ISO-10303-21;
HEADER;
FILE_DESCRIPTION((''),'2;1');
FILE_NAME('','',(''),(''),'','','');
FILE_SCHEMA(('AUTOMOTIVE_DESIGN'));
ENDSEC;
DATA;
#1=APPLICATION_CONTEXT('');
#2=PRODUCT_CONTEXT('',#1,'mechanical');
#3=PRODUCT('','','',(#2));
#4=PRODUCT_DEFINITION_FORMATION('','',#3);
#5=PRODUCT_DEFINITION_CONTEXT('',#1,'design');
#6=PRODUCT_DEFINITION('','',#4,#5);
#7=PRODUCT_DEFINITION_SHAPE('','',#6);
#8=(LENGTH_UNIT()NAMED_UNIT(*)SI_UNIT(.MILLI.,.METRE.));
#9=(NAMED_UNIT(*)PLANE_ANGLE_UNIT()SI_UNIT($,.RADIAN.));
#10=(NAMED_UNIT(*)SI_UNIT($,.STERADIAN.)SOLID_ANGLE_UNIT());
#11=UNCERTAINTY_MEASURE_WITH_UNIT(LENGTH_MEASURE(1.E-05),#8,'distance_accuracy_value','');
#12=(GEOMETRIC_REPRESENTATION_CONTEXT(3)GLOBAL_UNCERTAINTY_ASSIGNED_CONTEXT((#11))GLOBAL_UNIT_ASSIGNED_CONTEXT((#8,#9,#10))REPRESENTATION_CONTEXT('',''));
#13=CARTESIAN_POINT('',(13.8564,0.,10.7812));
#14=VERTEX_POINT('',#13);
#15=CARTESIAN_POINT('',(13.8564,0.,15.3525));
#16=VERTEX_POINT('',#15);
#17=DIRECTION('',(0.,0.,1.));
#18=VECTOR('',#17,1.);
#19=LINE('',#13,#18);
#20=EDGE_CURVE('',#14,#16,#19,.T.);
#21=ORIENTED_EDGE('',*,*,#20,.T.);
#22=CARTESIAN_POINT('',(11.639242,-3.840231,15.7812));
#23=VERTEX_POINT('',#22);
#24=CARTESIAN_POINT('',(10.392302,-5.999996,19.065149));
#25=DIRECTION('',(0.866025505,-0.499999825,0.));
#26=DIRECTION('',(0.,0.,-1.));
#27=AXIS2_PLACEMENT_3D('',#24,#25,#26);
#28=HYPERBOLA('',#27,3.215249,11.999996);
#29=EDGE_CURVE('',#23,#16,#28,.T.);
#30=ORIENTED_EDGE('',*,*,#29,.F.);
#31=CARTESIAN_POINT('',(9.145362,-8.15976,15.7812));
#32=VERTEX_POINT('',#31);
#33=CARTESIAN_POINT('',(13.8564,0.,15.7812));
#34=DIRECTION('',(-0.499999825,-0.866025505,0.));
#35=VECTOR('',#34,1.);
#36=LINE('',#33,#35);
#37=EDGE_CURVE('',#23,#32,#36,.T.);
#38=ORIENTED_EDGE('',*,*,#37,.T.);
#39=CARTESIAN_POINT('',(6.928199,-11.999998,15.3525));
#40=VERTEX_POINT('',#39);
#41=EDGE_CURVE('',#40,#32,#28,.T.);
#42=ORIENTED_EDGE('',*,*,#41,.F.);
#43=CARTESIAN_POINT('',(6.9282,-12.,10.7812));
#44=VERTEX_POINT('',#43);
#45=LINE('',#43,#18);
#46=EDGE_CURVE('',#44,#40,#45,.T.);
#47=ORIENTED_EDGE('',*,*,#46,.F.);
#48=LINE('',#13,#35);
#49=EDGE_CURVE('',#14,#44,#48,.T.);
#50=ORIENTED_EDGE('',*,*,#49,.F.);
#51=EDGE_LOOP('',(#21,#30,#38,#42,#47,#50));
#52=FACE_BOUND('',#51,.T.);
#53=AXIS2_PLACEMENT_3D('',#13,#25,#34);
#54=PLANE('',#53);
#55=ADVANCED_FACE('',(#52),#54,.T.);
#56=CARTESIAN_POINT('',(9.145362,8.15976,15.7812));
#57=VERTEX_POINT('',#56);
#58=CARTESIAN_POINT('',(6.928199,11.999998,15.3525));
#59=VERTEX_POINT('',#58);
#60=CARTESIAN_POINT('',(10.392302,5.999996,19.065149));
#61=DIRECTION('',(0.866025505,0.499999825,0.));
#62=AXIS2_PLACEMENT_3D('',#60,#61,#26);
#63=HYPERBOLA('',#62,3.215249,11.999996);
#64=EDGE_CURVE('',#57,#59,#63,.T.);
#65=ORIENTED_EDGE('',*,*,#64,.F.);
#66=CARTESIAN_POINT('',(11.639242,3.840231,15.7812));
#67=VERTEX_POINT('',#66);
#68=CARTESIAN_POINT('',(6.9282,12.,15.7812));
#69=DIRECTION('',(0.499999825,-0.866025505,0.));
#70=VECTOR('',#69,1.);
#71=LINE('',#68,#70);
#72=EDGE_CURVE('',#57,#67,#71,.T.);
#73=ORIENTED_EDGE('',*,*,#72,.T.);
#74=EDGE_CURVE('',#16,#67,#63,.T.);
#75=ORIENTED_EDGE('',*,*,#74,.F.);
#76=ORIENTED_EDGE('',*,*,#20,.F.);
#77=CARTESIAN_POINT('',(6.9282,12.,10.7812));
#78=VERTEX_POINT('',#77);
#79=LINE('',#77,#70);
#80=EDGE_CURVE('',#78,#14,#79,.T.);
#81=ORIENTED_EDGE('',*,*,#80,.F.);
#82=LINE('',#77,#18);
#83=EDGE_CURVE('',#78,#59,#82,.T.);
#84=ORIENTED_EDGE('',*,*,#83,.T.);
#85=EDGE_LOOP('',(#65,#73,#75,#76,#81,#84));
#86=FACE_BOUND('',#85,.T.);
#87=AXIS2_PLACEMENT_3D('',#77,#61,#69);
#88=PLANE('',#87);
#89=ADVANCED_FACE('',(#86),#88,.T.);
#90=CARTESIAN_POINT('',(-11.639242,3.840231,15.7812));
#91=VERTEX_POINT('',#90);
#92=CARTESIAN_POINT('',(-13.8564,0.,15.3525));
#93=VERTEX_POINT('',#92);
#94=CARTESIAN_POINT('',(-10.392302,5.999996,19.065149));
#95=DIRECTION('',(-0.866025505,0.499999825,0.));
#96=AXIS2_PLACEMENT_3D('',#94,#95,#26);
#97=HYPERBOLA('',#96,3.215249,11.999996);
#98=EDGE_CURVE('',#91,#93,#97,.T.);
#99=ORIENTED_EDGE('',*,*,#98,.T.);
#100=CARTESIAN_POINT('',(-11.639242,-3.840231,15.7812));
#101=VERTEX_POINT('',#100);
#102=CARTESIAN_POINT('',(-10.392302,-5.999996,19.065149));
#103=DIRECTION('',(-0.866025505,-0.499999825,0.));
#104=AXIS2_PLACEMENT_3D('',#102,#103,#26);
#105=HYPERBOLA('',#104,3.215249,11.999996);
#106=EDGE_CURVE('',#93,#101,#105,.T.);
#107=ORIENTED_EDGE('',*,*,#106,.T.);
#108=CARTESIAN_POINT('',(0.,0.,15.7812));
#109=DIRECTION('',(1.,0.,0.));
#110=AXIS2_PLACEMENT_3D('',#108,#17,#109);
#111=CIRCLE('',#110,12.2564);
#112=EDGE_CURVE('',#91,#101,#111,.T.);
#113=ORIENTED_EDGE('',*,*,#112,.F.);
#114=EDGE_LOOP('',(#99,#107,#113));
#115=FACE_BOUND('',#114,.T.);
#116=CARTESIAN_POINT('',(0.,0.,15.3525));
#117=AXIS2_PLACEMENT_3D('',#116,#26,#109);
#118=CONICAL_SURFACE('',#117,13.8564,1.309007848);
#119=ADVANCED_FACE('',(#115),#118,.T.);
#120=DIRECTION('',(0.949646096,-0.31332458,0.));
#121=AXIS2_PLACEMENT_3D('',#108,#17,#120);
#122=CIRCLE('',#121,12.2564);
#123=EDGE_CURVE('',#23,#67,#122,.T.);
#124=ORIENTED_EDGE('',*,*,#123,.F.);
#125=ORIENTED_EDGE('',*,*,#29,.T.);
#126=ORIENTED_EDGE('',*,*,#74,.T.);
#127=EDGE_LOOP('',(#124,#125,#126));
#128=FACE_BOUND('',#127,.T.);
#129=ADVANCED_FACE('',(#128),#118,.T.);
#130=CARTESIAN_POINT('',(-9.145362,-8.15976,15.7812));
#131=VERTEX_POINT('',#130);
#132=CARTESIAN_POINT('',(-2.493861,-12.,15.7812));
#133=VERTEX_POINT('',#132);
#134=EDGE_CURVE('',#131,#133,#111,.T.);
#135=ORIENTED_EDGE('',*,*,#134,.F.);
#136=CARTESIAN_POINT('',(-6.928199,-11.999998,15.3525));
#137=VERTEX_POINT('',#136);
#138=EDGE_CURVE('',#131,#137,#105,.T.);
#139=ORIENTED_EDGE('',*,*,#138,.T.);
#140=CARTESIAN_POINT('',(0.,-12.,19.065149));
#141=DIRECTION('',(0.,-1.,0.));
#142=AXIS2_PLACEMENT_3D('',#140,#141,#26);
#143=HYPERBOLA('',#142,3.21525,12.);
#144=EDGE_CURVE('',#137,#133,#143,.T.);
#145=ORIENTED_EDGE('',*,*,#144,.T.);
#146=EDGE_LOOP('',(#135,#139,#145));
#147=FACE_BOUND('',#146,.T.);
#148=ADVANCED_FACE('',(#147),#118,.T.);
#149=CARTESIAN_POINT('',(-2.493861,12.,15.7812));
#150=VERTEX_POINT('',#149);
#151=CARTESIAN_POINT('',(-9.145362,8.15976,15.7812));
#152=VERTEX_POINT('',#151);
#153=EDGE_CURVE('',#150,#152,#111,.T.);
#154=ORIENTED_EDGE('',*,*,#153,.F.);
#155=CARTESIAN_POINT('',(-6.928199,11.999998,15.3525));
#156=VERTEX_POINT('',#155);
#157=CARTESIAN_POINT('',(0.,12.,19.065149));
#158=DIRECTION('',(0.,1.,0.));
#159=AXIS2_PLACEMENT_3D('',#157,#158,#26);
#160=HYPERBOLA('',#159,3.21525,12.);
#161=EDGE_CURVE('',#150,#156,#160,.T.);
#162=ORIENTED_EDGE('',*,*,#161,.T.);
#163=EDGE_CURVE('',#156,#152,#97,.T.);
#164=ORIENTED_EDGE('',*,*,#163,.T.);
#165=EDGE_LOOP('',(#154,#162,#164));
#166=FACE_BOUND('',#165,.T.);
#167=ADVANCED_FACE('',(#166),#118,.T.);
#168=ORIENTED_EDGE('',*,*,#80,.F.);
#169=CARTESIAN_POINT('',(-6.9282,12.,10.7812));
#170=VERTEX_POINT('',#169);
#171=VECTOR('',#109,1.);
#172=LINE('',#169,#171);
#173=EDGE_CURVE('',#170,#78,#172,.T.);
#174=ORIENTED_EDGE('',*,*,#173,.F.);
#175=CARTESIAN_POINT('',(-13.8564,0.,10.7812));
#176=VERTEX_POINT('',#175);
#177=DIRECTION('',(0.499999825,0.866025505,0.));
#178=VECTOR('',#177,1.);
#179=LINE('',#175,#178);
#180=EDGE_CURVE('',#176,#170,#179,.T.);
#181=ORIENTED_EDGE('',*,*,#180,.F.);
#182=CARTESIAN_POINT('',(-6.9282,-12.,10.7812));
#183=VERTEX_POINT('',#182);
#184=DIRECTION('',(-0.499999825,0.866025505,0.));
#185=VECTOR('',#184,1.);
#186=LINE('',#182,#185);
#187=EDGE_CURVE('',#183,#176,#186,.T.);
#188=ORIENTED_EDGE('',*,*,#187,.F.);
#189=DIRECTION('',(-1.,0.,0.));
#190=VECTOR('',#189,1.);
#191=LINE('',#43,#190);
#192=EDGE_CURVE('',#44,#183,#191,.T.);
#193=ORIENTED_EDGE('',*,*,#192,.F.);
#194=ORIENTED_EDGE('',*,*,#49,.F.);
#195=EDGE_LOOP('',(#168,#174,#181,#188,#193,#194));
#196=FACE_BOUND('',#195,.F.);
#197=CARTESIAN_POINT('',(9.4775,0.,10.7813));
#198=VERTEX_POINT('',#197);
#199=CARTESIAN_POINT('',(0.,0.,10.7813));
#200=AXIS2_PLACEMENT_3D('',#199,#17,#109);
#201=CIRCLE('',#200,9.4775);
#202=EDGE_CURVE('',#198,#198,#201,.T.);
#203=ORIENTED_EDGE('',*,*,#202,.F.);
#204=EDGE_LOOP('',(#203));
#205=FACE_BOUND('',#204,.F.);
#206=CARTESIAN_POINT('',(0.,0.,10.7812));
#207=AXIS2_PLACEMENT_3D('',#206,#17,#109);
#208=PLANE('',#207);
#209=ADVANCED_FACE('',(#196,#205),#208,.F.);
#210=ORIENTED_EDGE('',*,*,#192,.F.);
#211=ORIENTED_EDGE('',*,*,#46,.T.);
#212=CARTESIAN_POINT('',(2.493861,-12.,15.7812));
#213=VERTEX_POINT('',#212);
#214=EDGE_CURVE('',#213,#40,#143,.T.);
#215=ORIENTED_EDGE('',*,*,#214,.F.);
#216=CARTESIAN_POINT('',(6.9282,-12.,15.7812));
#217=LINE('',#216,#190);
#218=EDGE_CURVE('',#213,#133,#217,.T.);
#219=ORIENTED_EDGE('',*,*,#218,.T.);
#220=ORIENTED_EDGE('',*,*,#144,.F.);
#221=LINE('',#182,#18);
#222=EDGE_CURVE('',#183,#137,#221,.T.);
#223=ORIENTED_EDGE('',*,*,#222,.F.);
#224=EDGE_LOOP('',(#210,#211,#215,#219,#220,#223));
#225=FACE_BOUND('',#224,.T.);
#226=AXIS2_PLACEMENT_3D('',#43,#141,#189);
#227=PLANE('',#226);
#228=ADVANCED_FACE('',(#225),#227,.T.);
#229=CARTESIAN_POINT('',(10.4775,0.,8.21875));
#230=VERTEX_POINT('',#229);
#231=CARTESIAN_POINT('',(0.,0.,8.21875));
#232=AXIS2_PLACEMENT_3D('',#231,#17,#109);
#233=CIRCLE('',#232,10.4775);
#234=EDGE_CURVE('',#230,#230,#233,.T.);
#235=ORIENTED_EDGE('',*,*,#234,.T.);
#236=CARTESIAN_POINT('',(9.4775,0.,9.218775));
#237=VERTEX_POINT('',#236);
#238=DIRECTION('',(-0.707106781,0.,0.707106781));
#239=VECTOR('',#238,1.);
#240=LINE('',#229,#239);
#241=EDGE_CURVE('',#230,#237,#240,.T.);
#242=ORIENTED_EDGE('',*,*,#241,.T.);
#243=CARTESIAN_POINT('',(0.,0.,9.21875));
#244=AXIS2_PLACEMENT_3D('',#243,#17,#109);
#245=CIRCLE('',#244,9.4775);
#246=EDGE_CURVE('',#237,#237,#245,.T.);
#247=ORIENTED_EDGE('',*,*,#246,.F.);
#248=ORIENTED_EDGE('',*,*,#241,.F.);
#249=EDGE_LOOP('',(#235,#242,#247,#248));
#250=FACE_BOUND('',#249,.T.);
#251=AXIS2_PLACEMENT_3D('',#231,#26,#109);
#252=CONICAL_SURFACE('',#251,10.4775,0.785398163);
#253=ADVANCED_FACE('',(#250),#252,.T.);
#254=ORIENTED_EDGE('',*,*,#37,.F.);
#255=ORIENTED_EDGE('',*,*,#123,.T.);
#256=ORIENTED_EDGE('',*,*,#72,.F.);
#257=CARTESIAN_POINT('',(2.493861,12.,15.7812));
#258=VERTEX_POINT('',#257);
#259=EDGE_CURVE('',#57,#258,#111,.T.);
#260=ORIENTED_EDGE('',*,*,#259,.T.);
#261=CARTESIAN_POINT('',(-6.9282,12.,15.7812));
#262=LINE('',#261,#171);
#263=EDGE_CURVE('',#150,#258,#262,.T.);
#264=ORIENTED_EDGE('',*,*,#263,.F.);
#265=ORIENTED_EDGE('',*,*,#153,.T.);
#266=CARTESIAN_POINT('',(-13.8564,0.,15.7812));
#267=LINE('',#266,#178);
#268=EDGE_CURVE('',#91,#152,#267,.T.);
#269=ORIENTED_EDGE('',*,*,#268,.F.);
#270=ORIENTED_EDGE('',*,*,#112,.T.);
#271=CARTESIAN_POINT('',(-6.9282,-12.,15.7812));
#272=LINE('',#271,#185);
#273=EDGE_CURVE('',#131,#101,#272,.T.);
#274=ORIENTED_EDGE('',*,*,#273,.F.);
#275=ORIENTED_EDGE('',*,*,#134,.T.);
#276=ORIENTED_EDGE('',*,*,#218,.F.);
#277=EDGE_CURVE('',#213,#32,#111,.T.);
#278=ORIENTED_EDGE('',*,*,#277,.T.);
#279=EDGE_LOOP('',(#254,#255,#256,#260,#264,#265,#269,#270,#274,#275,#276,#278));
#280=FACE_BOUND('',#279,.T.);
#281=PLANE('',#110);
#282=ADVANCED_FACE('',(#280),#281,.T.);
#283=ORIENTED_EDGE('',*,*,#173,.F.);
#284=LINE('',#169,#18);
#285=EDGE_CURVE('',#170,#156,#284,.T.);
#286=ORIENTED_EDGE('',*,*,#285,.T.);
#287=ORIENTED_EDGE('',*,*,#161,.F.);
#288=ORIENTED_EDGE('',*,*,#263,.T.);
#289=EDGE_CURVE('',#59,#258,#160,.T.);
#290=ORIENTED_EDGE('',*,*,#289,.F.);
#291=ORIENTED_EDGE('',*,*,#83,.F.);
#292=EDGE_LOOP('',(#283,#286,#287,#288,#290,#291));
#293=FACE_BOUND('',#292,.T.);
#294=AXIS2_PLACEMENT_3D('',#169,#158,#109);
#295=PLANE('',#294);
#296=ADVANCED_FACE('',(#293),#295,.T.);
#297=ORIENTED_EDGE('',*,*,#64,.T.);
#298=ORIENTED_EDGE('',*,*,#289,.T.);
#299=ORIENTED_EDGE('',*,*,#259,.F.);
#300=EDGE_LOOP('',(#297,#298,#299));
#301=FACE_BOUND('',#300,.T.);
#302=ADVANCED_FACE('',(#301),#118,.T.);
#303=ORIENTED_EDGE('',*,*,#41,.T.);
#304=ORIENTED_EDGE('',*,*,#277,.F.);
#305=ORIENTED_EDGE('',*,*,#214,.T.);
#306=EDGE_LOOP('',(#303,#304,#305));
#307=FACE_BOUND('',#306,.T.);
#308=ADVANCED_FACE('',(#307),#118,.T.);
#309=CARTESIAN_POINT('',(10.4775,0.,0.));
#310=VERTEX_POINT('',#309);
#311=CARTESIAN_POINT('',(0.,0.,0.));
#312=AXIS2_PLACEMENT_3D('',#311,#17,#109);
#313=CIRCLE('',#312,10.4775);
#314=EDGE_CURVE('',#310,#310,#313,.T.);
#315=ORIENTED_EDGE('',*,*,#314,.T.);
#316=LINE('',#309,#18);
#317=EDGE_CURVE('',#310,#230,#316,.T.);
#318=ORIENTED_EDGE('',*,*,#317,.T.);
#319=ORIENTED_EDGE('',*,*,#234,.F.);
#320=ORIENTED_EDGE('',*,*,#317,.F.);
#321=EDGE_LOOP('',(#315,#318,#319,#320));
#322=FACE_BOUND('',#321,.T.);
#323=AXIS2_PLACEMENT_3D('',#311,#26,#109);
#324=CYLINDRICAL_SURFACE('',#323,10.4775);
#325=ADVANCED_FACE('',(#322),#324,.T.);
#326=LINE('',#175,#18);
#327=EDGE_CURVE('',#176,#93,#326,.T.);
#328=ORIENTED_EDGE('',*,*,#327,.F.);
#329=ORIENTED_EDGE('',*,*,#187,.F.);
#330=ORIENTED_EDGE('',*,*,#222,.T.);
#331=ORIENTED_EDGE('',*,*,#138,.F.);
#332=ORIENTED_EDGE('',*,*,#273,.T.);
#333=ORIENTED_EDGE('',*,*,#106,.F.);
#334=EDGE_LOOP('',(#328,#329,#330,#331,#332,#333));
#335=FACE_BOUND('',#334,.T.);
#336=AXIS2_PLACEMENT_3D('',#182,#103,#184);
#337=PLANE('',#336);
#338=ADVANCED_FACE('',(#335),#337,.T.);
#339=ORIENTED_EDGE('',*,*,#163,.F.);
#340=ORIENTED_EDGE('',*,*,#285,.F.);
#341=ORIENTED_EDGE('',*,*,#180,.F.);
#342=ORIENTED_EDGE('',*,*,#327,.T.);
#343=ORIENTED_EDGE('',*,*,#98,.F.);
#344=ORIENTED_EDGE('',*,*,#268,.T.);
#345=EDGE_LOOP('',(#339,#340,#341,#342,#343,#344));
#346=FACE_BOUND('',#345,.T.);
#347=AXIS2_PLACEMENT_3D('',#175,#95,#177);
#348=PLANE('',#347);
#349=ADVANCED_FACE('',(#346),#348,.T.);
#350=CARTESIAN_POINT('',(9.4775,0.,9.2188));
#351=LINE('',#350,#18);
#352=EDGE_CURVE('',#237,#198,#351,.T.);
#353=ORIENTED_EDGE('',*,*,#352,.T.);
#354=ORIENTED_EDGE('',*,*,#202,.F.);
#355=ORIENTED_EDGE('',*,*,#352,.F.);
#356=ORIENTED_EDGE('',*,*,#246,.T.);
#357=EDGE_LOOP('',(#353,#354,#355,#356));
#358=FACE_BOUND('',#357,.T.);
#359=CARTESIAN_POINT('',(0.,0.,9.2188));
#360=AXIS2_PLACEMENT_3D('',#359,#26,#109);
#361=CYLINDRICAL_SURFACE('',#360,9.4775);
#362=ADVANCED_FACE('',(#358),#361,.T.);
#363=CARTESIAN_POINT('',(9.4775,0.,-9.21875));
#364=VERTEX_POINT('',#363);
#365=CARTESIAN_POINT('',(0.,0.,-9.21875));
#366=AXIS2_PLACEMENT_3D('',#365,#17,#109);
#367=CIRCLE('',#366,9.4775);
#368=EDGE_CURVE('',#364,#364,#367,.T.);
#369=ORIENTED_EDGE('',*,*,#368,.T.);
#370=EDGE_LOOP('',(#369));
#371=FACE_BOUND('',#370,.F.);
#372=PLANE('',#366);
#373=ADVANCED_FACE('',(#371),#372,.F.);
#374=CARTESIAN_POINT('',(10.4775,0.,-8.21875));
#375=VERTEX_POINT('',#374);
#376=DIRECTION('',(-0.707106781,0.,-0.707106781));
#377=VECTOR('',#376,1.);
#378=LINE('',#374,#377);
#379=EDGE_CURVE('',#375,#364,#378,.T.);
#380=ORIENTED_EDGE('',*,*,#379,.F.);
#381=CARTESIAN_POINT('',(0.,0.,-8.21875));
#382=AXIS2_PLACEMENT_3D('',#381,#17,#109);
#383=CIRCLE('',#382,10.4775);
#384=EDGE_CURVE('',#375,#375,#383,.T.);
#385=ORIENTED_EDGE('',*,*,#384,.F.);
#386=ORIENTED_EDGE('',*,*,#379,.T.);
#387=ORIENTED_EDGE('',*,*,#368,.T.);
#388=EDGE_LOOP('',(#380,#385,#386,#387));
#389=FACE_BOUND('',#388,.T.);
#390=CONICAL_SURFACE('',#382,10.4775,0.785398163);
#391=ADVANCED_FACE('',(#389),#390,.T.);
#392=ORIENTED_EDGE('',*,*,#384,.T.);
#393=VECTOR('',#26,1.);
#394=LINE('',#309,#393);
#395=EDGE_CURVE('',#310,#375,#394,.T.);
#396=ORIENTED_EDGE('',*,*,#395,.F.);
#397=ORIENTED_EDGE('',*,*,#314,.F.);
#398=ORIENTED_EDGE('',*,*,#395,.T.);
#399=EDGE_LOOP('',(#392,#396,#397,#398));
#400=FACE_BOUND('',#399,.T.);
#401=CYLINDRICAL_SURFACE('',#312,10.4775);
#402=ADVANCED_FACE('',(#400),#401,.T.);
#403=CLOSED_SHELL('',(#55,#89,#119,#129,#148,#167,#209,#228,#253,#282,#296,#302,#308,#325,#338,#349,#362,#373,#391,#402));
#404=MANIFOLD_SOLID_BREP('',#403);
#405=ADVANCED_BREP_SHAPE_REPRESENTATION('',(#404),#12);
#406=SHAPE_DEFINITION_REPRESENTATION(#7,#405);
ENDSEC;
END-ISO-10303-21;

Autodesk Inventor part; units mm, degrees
ref_plane "YZ Plane" through (0, 0, 0) normal (1, 0, 0) x (0, 1, 0)
ref_plane "XZ Plane" through (0, 0, 0) normal (0, 1, 0) x (-1, 0, 0)
ref_plane "XY Plane" through (0, 0, 0) normal (0, 0, 1) x (1, 0, 0)
sketch "Szkic7" plane through (0, 0, 0) normal (0, 0, 1) x (1, 0, 0)
  circle A0 centre (0, 0) radius 10.4775
  dimension "d35" = 20.955
extrude "Wyciągnięcie proste2" add sketch "Szkic7" along normal mid plane 18.4375
chamfer "Faza2" distance 1 angle 45 1 edges at (-10.4775, 0, 9.2188)
sketch "Szkic9" plane through (0, 0, 9.2188) normal (0, 0, 1) x (1, 0, 0)
  circle A0 centre (0, 0) radius 9.4775 projected
extrude "Wyciągnięcie proste3" add sketch "Szkic9" along normal blind 1.5625
sketch "Szkic10" plane through (0, 0, 10.7812) normal (0, 0, 1) x (1, 0, 0)
  line L0 (-6.9282, 12) -> (6.9282, 12)
  line L1 (6.9282, 12) -> (13.8564, 0)
  line L2 (13.8564, 0) -> (6.9282, -12)
  line L3 (6.9282, -12) -> (-6.9282, -12)
  line L4 (-6.9282, -12) -> (-13.8564, 0)
  line L5 (-13.8564, 0) -> (-6.9282, 12)
  line L6 (0, 14.6685) -> (0, -14.6685) construction
  line L7 (-14.6685, 0) -> (14.6685, 0) construction
  point P0 (0, 0)
  point P1 (0, 0)
  point P2 (0, 12)
  dimension "d44" = 24
extrude "Wyciągnięcie proste4" add sketch "Szkic10" along normal blind 5
sketch "Szkic12" plane through (0, 0, 0) normal (0, 1, 0) x (-1, 0, 0)
  line L0 (0, -2.1463) -> (0, 12.8775) construction
  line L1 (-6.9282, 10.7812) -> (-6.9282, 15.7812) construction
  line L2 (-13.8564, 15.7812) -> (-6.9282, 15.7812) construction
  line L3 (-13.8564, 10.7812) -> (-13.8564, 15.7812) projected
  line L4 (-13.8564, 15.3525) -> (-12.2564, 15.7812)
  line L5 (-13.8564, 15.7812) -> (-6.9282, 15.7812) projected
  line L6 (-13.8564, 10.7812) -> (-6.9282, 10.7812) projected
  point P0 (0, 0)
  dimension "d50" = 15
  dimension "d51" = 1.6
revolve "Obrót2" cut sketch "Szkic12" angle 360 about axis through (0, 0, -10) along (0, 0, 1)
thread "Gwint3" size "G20.955x1.814" designation "G 1/2" class "A" standard "ISO Pipe Threads" full length
chamfer "Faza3" distance 1 angle 45 1 edges at (-10.4775, 0, -9.2188)
equation "\"d35\" = OD"
equation "\"d36\" = 0.7375 * L"
equation "\"d42\" = 0.0625 * L"
equation "\"d44\" = SW"
equation "\"d45\" = 0.2 * L"
equation "\"d51\" = 0.0666667 * SW"
equation "\"SzerokośćGięciaPodcięcia\" = Grubość"
equation "\"RozmiarPodcięciaNarożnika\" = 4 * Grubość"
equation "\"PromieńPrzejścia\" = PromieńGięcia"
equation "\"Rozmiar_promienia_Jacobiego\" = PromieńGięcia"
equation "\"Wielk_odstępu\" = Grubość"
equation "\"d2\" = PromieńGięcia"
equation "\"d23\" = PromieńGięcia"
equation "\"OD\" = 20.955"
equation "\"SW\" = 24"
equation "\"L\" = 25"
equation "\"Grubość\" = 1.5"
equation "\"PromieńGięcia\" = 3"
properties part number "Korek sześciokątny BSP 1/2'' L=25" material "304"
